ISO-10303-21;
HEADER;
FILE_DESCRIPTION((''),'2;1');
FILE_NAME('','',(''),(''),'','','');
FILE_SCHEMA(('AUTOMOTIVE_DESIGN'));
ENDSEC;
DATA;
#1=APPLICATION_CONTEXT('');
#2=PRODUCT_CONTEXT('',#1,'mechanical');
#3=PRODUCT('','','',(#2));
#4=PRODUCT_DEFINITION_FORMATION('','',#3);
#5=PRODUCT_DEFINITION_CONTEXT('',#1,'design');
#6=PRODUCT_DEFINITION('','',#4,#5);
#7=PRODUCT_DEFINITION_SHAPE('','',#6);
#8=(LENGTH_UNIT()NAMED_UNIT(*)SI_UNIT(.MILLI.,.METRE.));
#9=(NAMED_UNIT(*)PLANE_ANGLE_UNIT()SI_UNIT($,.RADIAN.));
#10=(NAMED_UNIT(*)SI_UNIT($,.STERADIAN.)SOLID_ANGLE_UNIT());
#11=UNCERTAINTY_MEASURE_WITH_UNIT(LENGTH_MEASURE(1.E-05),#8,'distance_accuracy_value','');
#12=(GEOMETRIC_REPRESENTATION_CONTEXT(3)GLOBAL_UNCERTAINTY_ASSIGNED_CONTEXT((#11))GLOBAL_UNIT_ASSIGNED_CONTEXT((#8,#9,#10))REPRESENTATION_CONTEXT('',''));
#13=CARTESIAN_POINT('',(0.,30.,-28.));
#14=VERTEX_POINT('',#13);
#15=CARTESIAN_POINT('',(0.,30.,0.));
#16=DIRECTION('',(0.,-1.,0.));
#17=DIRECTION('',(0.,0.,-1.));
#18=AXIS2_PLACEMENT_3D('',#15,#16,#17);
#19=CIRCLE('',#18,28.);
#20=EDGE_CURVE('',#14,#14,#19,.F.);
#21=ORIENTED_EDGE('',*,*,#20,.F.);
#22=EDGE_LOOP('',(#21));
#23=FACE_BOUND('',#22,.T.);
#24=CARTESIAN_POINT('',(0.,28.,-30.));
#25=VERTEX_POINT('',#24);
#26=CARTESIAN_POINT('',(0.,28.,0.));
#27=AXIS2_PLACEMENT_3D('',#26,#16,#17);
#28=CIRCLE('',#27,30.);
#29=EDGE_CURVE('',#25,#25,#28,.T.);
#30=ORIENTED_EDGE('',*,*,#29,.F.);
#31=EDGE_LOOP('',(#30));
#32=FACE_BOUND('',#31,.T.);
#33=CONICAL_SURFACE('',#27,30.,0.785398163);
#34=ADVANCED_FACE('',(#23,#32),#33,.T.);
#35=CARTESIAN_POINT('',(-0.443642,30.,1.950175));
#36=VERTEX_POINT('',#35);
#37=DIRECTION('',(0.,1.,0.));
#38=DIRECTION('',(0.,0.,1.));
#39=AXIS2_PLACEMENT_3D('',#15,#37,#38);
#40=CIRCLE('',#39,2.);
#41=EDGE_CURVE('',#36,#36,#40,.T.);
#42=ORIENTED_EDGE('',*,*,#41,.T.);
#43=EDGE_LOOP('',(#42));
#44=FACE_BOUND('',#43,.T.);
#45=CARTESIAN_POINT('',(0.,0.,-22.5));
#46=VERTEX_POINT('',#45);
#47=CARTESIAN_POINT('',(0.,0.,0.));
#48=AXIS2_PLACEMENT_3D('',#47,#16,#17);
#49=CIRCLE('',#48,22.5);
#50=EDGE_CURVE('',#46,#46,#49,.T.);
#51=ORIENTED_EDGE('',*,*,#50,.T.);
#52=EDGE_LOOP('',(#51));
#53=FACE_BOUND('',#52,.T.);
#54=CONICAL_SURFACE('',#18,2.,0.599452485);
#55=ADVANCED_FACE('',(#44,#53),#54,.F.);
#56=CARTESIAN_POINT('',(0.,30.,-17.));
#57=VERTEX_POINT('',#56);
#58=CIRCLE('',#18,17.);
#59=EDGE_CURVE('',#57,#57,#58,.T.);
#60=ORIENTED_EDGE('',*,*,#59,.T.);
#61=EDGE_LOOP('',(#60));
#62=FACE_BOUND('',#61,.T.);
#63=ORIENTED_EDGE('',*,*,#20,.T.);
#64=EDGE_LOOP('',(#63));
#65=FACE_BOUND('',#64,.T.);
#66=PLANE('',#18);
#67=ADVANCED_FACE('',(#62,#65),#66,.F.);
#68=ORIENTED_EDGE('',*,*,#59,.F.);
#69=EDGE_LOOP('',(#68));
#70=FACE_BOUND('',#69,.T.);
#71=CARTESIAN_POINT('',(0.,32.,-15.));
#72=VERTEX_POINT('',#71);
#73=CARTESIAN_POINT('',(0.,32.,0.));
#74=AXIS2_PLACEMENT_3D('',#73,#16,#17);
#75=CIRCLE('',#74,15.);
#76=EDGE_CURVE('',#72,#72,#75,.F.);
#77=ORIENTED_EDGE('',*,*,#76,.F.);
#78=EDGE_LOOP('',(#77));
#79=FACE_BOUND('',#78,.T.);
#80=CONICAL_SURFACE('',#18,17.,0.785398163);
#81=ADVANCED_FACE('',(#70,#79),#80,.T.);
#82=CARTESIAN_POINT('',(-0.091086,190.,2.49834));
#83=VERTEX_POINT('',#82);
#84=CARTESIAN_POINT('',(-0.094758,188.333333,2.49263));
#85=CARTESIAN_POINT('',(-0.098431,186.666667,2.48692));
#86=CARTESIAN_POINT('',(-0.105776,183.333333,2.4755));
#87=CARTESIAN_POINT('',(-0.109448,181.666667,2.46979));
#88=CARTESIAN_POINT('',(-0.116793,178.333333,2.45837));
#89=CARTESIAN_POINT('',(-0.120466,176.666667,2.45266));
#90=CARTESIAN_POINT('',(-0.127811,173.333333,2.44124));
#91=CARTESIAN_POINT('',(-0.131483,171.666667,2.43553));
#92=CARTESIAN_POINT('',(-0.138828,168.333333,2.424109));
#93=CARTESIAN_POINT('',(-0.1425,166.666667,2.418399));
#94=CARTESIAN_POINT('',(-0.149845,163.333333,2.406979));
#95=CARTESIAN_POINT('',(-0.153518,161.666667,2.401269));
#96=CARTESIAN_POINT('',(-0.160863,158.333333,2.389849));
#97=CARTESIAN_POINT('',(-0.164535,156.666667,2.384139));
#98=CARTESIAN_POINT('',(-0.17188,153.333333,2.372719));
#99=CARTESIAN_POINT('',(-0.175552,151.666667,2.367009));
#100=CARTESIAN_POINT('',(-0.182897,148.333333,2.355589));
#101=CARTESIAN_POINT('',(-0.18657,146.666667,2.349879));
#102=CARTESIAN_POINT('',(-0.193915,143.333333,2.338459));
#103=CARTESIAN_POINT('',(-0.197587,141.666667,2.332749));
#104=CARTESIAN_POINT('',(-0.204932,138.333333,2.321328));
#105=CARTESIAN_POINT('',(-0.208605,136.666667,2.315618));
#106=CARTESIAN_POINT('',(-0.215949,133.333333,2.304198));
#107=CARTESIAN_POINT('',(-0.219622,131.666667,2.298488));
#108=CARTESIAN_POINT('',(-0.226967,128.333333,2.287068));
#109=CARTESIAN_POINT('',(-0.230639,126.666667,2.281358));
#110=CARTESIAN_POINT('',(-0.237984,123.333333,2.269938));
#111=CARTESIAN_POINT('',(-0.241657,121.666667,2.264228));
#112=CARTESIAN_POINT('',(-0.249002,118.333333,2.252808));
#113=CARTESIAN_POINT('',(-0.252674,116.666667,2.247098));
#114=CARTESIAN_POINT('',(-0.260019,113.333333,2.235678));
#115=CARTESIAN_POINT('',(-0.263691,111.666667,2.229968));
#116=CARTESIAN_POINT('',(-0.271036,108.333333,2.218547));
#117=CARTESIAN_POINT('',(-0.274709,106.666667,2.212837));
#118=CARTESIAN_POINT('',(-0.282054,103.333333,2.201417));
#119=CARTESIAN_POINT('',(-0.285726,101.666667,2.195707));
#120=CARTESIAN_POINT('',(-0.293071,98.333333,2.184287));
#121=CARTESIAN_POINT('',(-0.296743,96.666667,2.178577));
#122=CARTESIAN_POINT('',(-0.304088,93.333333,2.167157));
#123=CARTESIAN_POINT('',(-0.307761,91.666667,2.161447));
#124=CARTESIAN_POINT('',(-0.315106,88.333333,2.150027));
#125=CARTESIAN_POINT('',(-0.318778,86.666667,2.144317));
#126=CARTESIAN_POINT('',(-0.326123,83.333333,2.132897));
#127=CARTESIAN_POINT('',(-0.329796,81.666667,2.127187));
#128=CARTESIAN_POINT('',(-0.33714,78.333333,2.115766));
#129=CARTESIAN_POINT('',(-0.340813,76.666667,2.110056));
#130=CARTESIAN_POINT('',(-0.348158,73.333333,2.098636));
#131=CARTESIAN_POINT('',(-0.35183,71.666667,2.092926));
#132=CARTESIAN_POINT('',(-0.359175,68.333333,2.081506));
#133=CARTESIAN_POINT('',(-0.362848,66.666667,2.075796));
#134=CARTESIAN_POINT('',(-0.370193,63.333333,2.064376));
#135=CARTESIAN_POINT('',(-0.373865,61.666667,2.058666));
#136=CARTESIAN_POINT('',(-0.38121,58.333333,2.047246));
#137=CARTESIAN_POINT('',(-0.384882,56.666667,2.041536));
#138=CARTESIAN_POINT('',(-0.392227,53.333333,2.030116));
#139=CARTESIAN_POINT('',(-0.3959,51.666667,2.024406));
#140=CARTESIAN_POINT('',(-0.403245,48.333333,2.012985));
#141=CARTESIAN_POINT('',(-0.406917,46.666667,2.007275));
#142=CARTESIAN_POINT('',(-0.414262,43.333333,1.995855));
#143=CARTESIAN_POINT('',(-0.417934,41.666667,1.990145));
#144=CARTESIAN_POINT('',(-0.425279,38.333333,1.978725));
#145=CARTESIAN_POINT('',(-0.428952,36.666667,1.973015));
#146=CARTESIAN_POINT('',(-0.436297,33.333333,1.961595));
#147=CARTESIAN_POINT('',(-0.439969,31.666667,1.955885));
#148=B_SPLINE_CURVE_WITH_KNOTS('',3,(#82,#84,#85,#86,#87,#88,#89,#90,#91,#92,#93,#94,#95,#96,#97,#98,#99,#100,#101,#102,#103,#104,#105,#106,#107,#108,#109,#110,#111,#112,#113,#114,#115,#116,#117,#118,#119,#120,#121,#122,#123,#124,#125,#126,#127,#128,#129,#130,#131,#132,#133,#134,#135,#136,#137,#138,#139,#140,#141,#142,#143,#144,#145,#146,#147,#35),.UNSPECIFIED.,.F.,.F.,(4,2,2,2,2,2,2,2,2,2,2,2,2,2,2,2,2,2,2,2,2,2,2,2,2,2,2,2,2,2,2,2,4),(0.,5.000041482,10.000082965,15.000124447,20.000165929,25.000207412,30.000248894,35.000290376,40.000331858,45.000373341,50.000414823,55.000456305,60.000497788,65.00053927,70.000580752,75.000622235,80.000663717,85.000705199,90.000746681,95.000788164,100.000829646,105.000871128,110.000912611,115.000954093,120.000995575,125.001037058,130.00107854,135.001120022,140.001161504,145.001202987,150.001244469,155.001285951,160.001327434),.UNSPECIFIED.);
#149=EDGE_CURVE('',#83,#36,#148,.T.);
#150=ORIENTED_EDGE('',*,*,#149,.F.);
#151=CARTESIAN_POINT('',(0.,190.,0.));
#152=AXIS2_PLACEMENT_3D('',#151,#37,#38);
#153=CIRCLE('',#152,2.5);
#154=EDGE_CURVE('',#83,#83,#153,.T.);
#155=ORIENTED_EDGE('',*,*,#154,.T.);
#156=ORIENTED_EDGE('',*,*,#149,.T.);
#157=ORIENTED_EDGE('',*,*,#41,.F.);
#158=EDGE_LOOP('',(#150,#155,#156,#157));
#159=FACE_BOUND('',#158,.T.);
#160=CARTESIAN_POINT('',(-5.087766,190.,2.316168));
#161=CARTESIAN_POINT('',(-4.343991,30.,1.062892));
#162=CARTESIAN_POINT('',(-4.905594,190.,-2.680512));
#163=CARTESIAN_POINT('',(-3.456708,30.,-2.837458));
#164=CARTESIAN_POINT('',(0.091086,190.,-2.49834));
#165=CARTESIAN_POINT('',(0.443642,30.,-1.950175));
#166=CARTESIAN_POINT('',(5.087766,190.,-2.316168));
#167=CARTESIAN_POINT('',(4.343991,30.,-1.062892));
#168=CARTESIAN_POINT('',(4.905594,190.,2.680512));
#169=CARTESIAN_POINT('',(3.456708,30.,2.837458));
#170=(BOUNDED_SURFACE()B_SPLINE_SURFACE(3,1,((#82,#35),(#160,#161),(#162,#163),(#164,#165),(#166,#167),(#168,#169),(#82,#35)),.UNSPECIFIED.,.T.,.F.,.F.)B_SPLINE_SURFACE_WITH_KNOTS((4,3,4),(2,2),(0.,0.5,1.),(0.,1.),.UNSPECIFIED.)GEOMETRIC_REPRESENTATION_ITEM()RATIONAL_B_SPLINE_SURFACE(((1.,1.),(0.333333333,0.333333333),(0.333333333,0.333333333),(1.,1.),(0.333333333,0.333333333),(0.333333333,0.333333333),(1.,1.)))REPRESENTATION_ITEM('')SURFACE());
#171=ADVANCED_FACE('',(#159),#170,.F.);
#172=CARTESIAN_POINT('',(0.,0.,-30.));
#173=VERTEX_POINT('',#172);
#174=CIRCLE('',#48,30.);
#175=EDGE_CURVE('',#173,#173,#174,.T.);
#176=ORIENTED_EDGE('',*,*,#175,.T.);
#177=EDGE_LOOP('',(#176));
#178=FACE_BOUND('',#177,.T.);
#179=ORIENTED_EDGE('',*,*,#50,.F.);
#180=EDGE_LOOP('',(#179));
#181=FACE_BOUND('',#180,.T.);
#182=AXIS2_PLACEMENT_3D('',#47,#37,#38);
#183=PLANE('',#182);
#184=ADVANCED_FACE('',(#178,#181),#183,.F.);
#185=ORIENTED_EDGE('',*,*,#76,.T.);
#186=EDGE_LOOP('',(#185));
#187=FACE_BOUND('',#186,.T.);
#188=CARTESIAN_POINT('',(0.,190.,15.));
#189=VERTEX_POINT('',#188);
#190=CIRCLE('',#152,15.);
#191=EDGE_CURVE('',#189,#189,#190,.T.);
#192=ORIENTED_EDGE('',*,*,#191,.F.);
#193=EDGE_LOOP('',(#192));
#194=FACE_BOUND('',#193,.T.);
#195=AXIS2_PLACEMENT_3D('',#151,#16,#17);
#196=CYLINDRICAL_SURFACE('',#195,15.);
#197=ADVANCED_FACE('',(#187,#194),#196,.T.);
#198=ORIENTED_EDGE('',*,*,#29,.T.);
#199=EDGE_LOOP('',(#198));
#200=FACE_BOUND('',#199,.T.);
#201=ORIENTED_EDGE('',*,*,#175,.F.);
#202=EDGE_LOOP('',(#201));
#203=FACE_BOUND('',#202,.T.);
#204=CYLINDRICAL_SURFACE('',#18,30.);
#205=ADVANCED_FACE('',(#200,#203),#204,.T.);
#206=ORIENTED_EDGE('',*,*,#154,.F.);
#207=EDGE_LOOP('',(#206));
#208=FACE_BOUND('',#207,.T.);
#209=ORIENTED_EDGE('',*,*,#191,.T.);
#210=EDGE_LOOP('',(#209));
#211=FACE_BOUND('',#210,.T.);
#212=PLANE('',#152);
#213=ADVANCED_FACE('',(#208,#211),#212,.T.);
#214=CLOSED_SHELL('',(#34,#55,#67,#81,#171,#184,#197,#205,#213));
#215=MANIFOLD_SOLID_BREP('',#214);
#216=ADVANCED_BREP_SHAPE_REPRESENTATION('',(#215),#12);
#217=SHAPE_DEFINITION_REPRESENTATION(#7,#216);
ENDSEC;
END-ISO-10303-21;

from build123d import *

# Parameters (mm, degrees)
SKETCH2_R           = 15
BOSS_EXTRUDE1_DEPTH = 190
SKETCH3_R           = 30
BOSS_EXTRUDE2_DEPTH = 30
CHAMFER1_SIZE       = 2
CHAMFER2_SIZE       = 2
SKETCH10_R          = 2
SKETCH11_R          = 22.5


with BuildPart() as part:
    # Sketch2 → Boss-Extrude1 (new body)
    with BuildSketch(Plane(origin=(0, 0, 0), x_dir=(1, 0, 0), z_dir=(0, 1, 0))):
        with Locations(Location((0, 0, 0), (0, 0, 270))):
            Circle(SKETCH2_R)
    extrude(amount=BOSS_EXTRUDE1_DEPTH)

    # Sketch3 → Boss-Extrude2 (add)
    with BuildSketch(Plane.XZ):
        with Locations(Location((0, 0, 0), (0, 0, 270))):
            Circle(SKETCH3_R)
    extrude(amount=-BOSS_EXTRUDE2_DEPTH)

    # Chamfer1
    chamfer1_edges = [part.edges().sort_by_distance(p)[0] for p in [
        (0, 30, -15),
    ]]
    chamfer(chamfer1_edges, length=CHAMFER1_SIZE)

    # Chamfer2
    chamfer2_edges = [part.edges().sort_by_distance(p)[0] for p in [
        (0, 30, 30),
    ]]
    chamfer(chamfer2_edges, length=CHAMFER2_SIZE)

    # Cut-Loft1: read off the stored shape, not the designer's step
    # Cut-Loft1: loft between two sections, ruled curve by curve
    cut_loft1_from = [
        Edge.make_bspline([(-0.091086023, 190, 2.498340116), (-5.087766255, 190, 2.316168071), (-4.90559421, 190, -2.680512162), (0.091086023, 190, -2.498340116), (5.087766255, 190, -2.316168071), (4.90559421, 190, 2.680512162), (-0.091086023, 190, 2.498340116)], [0, 0, 0, 0, 0.5, 0.5, 0.5, 1, 1, 1, 1], 3, [1, 0.333333333, 0.333333333, 1, 0.333333333, 0.333333333, 1]),
    ]
    cut_loft1_to = [
        Edge.make_bspline([(-0.443641604, 30, 1.950174897), (-4.343991397, 30, 1.062891688), (-3.456708189, 30, -2.837458105), (0.443641604, 30, -1.950174897), (4.343991397, 30, -1.062891688), (3.456708189, 30, 2.837458105), (-0.443641604, 30, 1.950174897)], [0, 0, 0, 0, 0.5, 0.5, 0.5, 1, 1, 1, 1], 3, [1, 0.333333333, 0.333333333, 1, 0.333333333, 0.333333333, 1]),
    ]
    cut_loft1 = Solid(Shell([*[Face.make_surface_from_curves(cut_loft1_from[k], cut_loft1_to[k]) for k in range(1)], Face(Wire(cut_loft1_from)), Face(Wire(cut_loft1_to))]))
    add(cut_loft1, mode=Mode.SUBTRACT)

    # Sketch10 → Cut-Loft3 section 0
    with BuildSketch(Plane(origin=(0, 30, 0), x_dir=(1, 0, 0), z_dir=(0, 1, 0))):
        Circle(SKETCH10_R)
    # Sketch11 → Cut-Loft3 section 1
    with BuildSketch(Plane.XZ):
        Circle(SKETCH11_R)
    loft(mode=Mode.SUBTRACT)


solid = part.part
